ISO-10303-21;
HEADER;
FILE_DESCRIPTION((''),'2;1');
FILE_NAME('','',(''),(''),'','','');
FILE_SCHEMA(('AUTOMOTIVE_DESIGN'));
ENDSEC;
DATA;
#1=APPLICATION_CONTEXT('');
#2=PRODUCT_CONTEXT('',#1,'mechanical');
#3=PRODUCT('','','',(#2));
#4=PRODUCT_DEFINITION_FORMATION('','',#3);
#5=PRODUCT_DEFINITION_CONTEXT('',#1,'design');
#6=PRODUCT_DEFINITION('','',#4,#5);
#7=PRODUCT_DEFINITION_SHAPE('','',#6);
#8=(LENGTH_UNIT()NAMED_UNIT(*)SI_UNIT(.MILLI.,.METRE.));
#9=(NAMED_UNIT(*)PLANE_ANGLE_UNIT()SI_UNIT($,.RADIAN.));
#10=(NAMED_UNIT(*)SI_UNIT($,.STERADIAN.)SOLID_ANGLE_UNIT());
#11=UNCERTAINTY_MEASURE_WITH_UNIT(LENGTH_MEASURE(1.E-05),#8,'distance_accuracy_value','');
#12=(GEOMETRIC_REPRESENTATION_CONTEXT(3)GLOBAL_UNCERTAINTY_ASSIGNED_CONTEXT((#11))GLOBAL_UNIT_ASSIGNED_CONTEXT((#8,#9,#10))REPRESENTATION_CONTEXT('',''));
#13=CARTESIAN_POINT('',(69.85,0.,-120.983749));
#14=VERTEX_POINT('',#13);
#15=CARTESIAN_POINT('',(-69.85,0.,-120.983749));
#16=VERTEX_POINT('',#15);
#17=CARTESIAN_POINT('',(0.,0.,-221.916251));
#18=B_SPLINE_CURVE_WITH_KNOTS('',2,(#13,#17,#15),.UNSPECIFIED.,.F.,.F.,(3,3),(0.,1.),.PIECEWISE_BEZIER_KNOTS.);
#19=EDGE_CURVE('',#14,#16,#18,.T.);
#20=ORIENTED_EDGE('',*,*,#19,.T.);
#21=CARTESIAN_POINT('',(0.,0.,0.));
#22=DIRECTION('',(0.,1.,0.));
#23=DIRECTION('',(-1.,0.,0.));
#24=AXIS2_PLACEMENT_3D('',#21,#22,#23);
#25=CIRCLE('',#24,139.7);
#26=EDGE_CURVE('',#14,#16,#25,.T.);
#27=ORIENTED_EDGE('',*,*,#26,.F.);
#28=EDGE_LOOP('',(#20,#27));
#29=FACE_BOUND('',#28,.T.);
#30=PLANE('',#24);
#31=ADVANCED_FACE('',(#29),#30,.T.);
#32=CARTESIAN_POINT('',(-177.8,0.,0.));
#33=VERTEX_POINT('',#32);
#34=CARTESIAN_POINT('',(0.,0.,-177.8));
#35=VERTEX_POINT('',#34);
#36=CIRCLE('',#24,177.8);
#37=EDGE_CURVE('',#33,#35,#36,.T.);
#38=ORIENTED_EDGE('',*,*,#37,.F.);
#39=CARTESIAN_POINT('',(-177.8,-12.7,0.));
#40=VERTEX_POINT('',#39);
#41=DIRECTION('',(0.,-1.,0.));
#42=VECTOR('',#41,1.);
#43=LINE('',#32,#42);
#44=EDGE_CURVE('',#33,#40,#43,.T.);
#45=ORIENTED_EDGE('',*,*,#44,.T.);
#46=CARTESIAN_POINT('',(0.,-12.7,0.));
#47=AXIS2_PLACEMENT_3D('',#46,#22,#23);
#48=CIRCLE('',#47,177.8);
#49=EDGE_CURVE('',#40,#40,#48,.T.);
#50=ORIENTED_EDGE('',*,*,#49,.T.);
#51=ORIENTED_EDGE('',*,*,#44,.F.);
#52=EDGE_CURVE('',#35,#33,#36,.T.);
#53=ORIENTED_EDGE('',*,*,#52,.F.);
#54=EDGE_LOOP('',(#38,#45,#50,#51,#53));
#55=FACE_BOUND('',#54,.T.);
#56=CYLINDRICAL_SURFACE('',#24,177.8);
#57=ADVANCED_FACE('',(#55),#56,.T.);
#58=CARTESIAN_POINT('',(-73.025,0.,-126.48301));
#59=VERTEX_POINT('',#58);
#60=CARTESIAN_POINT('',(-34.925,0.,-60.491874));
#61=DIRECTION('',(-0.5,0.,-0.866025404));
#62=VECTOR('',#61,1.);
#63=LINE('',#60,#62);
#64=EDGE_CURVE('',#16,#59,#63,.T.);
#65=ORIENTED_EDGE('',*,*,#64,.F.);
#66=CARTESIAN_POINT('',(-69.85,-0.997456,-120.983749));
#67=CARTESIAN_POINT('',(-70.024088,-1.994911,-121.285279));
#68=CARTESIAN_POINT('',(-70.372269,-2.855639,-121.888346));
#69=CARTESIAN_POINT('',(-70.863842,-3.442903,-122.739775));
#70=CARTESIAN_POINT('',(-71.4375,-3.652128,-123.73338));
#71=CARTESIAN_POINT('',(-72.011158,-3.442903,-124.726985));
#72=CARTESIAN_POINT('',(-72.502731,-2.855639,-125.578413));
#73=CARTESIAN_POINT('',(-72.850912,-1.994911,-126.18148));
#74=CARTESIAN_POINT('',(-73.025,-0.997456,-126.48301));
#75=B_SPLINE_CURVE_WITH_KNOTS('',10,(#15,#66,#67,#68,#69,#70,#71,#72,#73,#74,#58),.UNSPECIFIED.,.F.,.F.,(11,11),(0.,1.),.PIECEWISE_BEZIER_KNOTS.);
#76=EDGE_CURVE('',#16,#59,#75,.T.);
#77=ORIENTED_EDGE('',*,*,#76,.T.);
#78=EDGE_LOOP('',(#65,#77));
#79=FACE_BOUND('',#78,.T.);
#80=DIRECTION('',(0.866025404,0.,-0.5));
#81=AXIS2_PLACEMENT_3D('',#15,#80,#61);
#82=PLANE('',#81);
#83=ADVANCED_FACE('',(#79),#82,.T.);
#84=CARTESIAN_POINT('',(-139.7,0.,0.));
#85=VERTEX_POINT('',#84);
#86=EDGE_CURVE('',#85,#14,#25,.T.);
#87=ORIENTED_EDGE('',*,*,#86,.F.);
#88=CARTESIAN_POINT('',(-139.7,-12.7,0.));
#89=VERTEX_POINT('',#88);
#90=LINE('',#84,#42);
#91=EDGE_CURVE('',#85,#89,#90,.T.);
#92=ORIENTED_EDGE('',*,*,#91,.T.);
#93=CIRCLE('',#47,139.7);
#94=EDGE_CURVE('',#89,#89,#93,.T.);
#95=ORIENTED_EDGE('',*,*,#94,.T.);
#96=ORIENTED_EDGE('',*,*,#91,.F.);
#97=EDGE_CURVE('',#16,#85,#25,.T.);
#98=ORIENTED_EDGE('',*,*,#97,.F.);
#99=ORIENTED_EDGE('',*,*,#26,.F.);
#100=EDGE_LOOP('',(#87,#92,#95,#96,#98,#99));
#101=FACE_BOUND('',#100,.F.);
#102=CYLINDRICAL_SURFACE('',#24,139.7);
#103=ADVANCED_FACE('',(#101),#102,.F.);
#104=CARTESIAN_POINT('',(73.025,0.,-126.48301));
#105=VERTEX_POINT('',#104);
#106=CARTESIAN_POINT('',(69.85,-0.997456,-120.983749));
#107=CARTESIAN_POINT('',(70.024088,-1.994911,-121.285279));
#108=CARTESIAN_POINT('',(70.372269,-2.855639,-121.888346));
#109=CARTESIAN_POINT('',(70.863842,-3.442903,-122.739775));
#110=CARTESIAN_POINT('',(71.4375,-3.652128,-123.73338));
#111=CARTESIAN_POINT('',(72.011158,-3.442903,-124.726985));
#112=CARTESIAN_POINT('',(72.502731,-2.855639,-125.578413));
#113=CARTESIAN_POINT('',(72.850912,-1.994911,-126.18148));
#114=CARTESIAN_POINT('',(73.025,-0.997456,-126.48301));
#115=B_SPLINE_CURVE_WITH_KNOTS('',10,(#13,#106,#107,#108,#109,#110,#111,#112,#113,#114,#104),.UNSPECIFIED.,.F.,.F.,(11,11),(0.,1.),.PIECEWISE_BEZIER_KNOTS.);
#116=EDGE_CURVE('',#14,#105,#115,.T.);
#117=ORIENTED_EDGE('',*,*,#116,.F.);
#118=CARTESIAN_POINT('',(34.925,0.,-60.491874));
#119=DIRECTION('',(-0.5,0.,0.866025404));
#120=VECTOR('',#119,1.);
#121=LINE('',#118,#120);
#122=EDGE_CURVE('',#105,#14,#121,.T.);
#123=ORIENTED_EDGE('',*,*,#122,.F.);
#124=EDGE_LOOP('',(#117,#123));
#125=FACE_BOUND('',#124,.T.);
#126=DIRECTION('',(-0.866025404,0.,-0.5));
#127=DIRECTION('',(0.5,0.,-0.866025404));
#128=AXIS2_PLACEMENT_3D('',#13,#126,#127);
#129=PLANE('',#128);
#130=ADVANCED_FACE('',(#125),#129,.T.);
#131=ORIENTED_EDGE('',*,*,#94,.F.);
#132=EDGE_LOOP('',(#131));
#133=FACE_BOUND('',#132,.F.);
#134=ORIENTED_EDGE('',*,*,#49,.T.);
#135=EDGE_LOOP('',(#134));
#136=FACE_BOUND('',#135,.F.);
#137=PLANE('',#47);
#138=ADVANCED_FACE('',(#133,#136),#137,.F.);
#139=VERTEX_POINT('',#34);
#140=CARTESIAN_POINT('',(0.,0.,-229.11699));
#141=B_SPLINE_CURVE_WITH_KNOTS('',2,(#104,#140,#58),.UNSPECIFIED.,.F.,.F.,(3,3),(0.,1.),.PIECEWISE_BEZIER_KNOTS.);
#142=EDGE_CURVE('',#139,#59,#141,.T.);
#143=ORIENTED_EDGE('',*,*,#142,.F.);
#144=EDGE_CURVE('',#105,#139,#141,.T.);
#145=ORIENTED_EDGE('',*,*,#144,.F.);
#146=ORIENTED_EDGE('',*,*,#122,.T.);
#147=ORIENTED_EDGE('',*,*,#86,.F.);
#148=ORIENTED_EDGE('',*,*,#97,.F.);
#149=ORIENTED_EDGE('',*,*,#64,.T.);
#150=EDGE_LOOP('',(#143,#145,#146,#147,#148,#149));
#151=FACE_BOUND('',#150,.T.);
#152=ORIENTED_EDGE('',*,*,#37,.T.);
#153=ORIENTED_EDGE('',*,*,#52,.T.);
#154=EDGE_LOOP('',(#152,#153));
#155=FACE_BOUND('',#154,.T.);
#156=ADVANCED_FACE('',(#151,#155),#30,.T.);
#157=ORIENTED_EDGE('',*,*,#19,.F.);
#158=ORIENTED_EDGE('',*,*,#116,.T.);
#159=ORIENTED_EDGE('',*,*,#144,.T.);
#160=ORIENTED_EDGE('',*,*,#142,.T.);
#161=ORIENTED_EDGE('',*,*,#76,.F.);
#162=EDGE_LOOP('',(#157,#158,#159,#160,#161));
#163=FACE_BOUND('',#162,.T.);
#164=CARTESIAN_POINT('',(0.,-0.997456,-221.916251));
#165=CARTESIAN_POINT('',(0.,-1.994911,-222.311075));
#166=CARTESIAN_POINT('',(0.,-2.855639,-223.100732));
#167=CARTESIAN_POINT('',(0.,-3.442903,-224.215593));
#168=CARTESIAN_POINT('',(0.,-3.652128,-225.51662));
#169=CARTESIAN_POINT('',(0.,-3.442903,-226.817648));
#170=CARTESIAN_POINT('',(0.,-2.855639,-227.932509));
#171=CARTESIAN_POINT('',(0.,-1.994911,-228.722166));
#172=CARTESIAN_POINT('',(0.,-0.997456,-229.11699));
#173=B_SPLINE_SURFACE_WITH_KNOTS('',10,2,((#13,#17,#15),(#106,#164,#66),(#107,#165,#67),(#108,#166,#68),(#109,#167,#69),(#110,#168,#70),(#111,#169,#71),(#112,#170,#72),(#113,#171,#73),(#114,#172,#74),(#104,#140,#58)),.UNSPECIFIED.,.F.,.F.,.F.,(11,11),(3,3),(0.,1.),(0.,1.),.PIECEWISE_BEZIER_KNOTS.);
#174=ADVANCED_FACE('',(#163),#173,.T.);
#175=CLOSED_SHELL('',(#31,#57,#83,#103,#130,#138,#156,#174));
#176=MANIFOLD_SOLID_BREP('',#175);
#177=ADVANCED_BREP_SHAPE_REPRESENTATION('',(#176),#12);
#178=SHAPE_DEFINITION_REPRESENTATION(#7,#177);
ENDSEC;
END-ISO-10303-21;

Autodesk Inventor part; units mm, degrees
sketch "Sketch1" plane through (0, 0, 0) normal (0, 1, 0) x (-1, 0, 0)
  circle A0 centre (0, 0) radius 139.7
  circle A1 centre (0, 0) radius 177.8
  dimension "innerDiameter" = 279.4
  dimension "outerDiameter" = 355.6
extrude "Extrusion1" add sketch "Sketch1" against normal blind 12.7
sketch "Sketch5" plane through (0, 0, 0) normal (0, 1, 0) x (1, 0, 0)
  line L0 (0, 0) -> (-88.9, 153.9793) construction
  circle A0 centre (0, 0) radius 177.8 construction
  line L1 (0, 0) -> (88.9, 153.9793) construction
  line L2 (0, 0) -> (0, 177.8) construction
  circle A1 centre (0, 0) radius 142.875 construction
  circle A2 centre (0, 0) radius 174.625 construction
  point P0 (71.4375, 123.7334)
  point P1 (0, 174.625)
  point P2 (-71.4375, 123.7334)
  dimension "camOuterDiameter" = 349.25
  dimension "arcForCam" = 30
  dimension "d12" = 30
  dimension "camInnerDiameter" = 285.75
ref_plane "Work Plane3" through (0, 0, 0) normal (0.8660254, 0, 0.5) x (0.5, 0, -0.8660254)
ref_plane "Work Plane4" through (0, 0, 0) normal (-1, 0, 0) x (0, 0, -1)
ref_plane "Work Plane5" through (0, 0, 0) normal (0.8660254, 0, -0.5) x (-0.5, 0, -0.8660254)
sketch "Sketch10" plane through (0, 0, 0) normal (0.8660254, 0, 0.5) x (0.5, 0, -0.8660254)
  line L0 (-177.8, 0) -> (177.8, 0) projected
  circle A0 centre (142.875, 0) radius 3.175
  point P0 (0, 0)
  dimension "camDiameter" = 6.35
  dimension "d30" = 142.875
sketch "Sketch12" plane through (0, 0, 0) normal (-1, 0, 0) x (0, 0, -1)
  circle A0 centre (174.625, 0) radius 3.175
  point P0 (0, 0)
  dimension "d31" = 174.625
  dimension "d32" = 6.35
sketch "Sketch13" plane through (0, 0, 0) normal (0.8660254, 0, -0.5) x (-0.5, 0, -0.8660254)
  circle A0 centre (142.875, 0) radius 3.175
  point P0 (0, 0)
  dimension "d33" = 6.35
  dimension "d34" = 142.875
loft "Loft2" cut profiles "Sketch10", "Sketch12", "Sketch13"
equation "\"d12\" = arcForCam"
equation "\"d30\" = 0.5 * camInnerDiameter"
equation "\"d31\" = 0.5 * camOuterDiameter"
equation "\"d32\" = camDiameter"
equation "\"d33\" = camDiameter"
equation "\"d34\" = 0.5 * camInnerDiameter"
properties part number "NewCam02"
